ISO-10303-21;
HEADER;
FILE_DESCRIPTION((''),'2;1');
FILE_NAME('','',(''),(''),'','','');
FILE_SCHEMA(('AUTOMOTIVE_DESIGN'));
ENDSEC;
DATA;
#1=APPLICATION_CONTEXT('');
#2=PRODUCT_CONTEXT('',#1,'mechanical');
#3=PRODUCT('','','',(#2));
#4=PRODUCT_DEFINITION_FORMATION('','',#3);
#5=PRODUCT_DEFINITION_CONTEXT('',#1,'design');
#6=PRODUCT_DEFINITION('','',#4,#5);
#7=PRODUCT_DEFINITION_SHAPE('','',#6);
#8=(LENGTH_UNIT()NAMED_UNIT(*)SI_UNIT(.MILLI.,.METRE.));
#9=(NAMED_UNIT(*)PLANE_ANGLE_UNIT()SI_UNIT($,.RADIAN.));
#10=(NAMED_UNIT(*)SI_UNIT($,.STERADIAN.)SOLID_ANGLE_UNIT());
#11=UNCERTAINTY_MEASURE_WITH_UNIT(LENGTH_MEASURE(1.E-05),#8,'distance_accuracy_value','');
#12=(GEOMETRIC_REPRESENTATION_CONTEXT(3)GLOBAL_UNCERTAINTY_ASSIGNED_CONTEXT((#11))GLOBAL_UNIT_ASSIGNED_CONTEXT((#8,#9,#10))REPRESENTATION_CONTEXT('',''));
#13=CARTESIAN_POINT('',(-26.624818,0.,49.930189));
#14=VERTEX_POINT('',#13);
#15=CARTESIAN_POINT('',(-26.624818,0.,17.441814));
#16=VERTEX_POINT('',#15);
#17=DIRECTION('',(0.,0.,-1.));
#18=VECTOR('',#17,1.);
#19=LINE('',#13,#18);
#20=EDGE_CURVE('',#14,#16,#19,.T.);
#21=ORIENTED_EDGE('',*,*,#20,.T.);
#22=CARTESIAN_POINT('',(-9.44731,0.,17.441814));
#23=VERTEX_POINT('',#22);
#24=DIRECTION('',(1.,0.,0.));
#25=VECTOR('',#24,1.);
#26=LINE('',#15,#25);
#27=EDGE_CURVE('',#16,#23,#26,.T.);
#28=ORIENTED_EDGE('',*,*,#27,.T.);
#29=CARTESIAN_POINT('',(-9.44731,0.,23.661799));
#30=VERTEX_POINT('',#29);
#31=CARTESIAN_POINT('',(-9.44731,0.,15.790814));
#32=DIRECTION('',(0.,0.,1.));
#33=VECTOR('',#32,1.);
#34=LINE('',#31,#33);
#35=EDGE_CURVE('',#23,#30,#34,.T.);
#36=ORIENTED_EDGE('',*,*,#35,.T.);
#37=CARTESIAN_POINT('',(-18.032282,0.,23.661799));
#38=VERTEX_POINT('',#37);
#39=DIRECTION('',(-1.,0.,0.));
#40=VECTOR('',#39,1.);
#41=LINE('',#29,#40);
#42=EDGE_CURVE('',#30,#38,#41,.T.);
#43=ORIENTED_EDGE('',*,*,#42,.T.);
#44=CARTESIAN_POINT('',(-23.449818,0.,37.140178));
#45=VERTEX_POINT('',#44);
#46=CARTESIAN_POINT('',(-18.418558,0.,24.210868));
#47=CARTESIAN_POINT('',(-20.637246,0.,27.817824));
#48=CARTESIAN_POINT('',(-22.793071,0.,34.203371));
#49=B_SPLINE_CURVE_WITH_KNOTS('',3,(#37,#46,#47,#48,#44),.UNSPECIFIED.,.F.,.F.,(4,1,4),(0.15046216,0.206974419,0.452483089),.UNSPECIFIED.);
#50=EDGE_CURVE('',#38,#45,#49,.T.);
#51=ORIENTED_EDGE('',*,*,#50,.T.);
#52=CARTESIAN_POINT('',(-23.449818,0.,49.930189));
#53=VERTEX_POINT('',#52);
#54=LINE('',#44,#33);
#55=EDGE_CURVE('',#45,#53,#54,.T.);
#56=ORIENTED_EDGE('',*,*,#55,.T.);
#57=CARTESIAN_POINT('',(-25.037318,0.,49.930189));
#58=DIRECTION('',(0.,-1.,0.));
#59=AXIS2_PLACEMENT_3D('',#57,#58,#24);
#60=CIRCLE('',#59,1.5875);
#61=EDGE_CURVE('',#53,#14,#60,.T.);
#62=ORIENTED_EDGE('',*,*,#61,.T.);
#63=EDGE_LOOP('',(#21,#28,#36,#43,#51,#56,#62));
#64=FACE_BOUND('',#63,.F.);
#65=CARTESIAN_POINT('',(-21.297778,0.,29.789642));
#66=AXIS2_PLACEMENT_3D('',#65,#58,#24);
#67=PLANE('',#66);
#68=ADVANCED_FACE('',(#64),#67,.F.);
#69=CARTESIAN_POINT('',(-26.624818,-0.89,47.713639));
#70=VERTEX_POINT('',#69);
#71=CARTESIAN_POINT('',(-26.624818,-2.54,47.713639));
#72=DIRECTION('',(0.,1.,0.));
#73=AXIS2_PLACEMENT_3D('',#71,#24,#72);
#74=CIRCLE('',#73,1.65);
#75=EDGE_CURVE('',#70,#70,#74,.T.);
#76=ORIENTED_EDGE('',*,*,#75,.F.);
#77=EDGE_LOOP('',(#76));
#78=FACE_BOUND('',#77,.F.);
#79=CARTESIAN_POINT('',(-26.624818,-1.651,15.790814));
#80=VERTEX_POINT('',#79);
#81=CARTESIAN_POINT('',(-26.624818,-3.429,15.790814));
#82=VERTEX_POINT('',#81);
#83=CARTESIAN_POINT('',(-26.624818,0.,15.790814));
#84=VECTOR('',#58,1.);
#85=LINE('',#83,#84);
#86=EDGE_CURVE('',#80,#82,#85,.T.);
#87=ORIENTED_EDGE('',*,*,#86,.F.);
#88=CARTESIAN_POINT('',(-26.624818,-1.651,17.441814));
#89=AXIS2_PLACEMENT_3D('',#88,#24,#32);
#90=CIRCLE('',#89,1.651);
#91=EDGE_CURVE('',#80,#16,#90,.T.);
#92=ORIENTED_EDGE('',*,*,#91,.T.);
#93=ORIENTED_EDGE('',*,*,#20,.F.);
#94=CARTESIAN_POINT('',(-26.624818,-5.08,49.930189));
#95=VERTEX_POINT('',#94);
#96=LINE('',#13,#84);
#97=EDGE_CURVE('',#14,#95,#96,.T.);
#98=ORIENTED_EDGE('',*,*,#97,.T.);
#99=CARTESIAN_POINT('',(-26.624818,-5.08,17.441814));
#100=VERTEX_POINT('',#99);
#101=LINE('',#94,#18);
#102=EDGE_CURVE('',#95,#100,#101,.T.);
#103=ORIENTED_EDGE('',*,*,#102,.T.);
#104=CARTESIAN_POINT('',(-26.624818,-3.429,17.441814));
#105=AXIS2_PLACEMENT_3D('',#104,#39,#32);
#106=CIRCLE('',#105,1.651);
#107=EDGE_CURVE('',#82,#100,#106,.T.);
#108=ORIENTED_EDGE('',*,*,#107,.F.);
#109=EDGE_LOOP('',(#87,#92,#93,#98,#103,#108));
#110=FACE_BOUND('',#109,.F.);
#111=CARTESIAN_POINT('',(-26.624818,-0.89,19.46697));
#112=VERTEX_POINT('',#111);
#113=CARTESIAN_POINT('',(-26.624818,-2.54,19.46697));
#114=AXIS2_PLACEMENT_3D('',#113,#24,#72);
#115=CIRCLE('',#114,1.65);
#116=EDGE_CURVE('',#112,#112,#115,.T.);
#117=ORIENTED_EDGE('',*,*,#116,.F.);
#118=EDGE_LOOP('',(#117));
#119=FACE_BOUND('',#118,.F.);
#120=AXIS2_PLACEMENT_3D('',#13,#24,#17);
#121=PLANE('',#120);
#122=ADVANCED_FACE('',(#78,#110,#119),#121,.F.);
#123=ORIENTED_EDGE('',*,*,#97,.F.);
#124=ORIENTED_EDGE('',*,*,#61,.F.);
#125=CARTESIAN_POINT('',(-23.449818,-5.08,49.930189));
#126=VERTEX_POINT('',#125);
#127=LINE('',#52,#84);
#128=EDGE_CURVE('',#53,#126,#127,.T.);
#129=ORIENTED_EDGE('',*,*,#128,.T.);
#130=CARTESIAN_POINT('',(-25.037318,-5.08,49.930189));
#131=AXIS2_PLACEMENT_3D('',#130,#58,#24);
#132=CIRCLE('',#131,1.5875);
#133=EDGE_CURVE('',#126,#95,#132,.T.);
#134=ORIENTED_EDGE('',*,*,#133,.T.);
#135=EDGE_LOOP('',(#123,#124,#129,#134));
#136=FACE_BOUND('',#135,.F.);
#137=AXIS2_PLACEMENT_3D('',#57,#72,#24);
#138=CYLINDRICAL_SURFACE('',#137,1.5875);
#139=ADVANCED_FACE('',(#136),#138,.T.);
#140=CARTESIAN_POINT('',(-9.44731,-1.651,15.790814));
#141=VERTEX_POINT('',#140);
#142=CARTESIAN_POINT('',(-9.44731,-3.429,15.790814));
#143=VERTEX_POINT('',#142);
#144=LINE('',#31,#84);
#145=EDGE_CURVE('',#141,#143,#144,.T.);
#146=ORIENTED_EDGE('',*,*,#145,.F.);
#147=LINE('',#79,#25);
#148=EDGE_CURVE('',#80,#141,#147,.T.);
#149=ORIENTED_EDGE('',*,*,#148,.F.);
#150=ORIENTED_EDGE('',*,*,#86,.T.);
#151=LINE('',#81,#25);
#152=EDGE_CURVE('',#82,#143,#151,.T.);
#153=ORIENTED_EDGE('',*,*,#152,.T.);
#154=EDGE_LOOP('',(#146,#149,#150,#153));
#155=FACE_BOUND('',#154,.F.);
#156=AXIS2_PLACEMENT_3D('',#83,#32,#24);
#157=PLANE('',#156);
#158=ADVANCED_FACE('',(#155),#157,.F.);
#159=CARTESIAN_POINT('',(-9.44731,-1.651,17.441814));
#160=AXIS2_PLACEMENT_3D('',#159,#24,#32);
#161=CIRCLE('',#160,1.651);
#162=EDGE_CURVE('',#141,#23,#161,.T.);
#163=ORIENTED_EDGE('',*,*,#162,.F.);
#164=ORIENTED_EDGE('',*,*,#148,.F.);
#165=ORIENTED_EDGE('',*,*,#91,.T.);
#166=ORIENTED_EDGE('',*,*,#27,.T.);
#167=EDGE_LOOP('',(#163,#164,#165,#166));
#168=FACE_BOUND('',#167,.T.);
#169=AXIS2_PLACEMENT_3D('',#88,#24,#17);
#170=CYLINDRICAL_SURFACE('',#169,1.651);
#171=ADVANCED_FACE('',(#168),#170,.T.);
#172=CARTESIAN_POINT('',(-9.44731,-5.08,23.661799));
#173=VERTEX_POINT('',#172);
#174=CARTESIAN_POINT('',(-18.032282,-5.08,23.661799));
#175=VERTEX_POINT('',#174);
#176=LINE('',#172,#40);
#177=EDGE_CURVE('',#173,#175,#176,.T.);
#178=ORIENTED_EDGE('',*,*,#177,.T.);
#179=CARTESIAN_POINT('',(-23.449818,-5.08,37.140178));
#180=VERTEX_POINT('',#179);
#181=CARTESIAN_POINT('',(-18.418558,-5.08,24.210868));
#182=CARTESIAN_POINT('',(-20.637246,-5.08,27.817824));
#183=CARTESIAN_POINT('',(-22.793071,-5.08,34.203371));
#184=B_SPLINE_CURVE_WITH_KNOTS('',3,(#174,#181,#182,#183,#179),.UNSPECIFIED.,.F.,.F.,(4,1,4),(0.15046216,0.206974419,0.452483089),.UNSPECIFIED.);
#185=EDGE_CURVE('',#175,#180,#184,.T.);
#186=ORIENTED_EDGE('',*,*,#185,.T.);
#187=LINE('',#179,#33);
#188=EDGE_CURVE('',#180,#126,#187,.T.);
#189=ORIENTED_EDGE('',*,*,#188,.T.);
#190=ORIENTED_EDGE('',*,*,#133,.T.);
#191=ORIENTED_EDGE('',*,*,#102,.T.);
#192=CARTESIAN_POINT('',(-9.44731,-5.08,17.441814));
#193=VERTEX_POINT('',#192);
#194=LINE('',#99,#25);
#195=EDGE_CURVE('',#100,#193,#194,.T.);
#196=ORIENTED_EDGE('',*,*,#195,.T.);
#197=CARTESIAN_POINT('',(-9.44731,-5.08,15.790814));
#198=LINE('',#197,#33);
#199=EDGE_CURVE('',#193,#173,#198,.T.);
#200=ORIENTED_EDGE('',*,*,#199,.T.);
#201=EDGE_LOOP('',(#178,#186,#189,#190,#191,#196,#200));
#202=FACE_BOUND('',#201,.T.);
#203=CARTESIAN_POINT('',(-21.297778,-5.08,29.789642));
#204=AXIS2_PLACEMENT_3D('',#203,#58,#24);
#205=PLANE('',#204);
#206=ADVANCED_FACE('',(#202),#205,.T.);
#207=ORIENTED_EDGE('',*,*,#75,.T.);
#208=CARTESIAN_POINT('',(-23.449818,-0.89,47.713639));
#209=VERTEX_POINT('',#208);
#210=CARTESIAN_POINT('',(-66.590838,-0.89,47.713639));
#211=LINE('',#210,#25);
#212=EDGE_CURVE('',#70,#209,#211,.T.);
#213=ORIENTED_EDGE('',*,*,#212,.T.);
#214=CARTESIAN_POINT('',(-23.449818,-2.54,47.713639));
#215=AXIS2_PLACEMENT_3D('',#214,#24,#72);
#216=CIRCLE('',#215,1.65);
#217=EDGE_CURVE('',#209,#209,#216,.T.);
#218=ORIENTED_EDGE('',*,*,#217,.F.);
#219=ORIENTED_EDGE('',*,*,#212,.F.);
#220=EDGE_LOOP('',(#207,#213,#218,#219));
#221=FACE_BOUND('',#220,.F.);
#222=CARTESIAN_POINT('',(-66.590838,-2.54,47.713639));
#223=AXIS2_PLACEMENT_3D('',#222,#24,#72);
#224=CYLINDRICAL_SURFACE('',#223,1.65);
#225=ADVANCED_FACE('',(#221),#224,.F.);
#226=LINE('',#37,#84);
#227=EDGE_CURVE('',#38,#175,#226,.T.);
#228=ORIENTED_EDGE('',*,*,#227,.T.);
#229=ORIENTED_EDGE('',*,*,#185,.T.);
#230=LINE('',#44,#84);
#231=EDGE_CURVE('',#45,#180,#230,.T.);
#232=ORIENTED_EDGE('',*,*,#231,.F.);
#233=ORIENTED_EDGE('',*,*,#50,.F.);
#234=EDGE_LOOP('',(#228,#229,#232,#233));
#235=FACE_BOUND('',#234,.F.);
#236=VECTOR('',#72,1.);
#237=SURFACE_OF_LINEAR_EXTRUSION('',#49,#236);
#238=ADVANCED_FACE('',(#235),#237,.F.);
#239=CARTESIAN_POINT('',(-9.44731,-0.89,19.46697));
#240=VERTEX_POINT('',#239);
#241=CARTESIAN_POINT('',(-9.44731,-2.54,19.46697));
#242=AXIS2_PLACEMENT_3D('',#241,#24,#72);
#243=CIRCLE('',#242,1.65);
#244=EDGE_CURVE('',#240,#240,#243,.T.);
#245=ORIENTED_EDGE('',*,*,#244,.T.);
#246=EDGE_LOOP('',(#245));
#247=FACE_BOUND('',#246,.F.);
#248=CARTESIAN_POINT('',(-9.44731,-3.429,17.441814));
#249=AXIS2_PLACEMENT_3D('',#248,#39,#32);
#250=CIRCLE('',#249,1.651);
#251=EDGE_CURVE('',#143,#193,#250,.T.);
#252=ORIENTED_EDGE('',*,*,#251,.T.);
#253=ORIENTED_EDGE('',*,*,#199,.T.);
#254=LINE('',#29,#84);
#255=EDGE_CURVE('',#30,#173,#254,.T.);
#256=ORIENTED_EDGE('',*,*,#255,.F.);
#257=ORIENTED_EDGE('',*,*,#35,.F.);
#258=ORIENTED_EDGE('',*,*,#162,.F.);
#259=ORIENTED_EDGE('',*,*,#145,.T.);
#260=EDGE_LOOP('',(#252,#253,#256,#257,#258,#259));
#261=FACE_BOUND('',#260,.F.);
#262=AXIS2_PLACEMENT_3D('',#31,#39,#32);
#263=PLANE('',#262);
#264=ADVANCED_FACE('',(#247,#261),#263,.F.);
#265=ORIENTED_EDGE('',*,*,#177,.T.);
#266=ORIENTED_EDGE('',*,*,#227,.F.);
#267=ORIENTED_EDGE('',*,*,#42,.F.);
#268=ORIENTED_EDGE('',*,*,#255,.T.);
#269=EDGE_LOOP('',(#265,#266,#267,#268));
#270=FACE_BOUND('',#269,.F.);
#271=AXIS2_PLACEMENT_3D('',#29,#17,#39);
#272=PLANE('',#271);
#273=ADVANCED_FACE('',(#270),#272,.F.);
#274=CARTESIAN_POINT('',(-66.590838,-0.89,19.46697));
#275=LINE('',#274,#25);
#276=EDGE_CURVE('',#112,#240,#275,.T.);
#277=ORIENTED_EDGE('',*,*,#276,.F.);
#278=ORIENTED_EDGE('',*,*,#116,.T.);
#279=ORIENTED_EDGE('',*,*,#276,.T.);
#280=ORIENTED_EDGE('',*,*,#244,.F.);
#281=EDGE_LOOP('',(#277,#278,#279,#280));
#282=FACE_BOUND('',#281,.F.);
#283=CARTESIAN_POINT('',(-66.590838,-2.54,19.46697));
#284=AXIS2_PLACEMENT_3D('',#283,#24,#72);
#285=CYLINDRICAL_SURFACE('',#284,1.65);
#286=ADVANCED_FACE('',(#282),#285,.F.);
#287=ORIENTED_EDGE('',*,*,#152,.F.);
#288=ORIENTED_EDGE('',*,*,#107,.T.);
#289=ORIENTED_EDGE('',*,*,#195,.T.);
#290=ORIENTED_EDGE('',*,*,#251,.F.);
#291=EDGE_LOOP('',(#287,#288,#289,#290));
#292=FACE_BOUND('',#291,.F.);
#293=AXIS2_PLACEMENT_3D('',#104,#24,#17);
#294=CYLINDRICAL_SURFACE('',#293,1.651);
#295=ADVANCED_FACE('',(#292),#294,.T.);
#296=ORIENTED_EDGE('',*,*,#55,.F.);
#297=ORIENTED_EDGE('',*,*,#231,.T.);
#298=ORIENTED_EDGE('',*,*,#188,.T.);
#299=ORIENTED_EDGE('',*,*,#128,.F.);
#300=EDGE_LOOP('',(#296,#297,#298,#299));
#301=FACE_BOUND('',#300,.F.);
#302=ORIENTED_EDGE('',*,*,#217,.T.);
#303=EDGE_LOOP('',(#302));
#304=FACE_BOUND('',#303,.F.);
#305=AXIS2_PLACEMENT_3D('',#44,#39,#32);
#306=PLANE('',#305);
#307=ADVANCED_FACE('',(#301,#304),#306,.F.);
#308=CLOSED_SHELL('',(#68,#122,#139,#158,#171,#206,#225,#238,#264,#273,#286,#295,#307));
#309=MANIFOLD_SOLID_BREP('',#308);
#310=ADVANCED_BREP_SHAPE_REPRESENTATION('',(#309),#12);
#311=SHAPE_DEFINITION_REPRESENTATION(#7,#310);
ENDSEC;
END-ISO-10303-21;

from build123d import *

# Parameters (mm, degrees)
F1_DEPTH = 5.08
F2_R     = 1.651
F4_D     = 3.3


with BuildPart() as f1:
    # F0 (on Front) → F1 (new body)
    with BuildSketch(Plane.XZ):
        with BuildLine():
            Line((-26.6248177087, 44.2240222495), (-26.6248177087, 37.1401777957))
            Line((-26.6248177087, 37.1401777957), (-26.6248177087, 15.790813717))
            Line((-26.6248177087, 15.790813717), (-18.0322819572, 15.790813717))
            Line((-18.0322819572, 15.790813717), (-9.4473101199, 15.790813717))
            Line((-9.4473101199, 15.790813717), (-9.4473101199, 23.6617988805))
            Line((-9.4473101199, 23.6617988805), (-16.3273841628, 23.6617988805))
            add(Edge.make_bspline(
                [(-16.3273841628, 23.6617988805), (-16.2021531976, 23.1573319897), (-16.1372444387, 22.7565283285), (-16.1473177087, 22.4913693964)],
                knots=[0.9536770063, 0.9536770063, 0.9536770063, 0.9536770063, 1, 1, 1, 1], degree=3))
            add(Edge.make_bspline(
                [(-16.1473177087, 22.4913693964), (-16.1800367938, 21.6301041251), (-17.0038324761, 22.1999200382), (-18.0322819572, 23.6617988805)],
                knots=[0, 0, 0, 0, 0.1504621604, 0.1504621604, 0.1504621604, 0.1504621604], degree=3))
            add(Edge.make_bspline(
                [(-18.0322819572, 23.6617988805), (-18.4185584968, 24.2108676593), (-20.6372456091, 27.8178237541), (-22.7930713687, 34.2033705284), (-23.4498177087, 37.1401777957)],
                knots=[0.1504621604, 0.1504621604, 0.1504621604, 0.1504621604, 0.2069744186, 0.4524830891, 0.4524830891, 0.4524830891, 0.4524830891], degree=3))
            add(Edge.make_bspline(
                [(-23.4498177087, 37.1401777957), (-23.7877118735, 38.6511569639), (-23.8355675171, 39.5655078846), (-23.4498177087, 39.3262133002)],
                knots=[0.4524830891, 0.4524830891, 0.4524830891, 0.4524830891, 0.578796617, 0.578796617, 0.578796617, 0.578796617], degree=3))
            Line((-23.4498177087, 39.3262133002), (-23.4498177087, 44.2240222495))
            Line((-23.4498177087, 44.2240222495), (-23.4498177087, 49.9301888049))
            ThreePointArc((-23.4498177087, 49.9301888049), (-25.0373177087, 51.5176888049), (-26.6248177087, 49.9301888049))
            Line((-26.6248177087, 49.9301888049), (-26.6248177087, 44.2240222495))
        make_face()
        with BuildLine():
            Line((-23.4498177087, 37.1401777957), (-23.4498177087, 39.3262133002))
            add(Edge.make_bspline(
                [(-23.4498177087, 37.1401777957), (-23.7877118735, 38.6511569639), (-23.8355675171, 39.5655078846), (-23.4498177087, 39.3262133002)],
                knots=[0.4524830891, 0.4524830891, 0.4524830891, 0.4524830891, 0.578796617, 0.578796617, 0.578796617, 0.578796617], degree=3))
        make_face()
        with BuildLine():
            add(Edge.make_bspline(
                [(-16.3273841628, 23.6617988805), (-16.2021531976, 23.1573319897), (-16.1372444387, 22.7565283285), (-16.1473177087, 22.4913693964)],
                knots=[0.9536770063, 0.9536770063, 0.9536770063, 0.9536770063, 1, 1, 1, 1], degree=3))
            Line((-16.3273841628, 23.6617988805), (-18.0322819572, 23.6617988805))
            add(Edge.make_bspline(
                [(-16.1473177087, 22.4913693964), (-16.1800367938, 21.6301041251), (-17.0038324761, 22.1999200382), (-18.0322819572, 23.6617988805)],
                knots=[0, 0, 0, 0, 0.1504621604, 0.1504621604, 0.1504621604, 0.1504621604], degree=3))
        make_face()
    extrude(amount=F1_DEPTH)

    # F2
    f2_edges = [f1.edges().sort_by_distance(p)[0] for p in [
        (-18.036064, -5.08, 15.790814),
        (-18.036064, 0, 15.790814),
    ]]
    fillet(f2_edges, radius=F2_R)

    # F4 (through all)
    with Locations(Plane(origin=(-26.6248177087, 0, 0), x_dir=(0, -1, 0), z_dir=(-1, 0, 0))):
        with Locations((2.54, 47.7136392146), (2.54, 19.4669695918)):
            Hole(F4_D / 2)


solid = f1.part
